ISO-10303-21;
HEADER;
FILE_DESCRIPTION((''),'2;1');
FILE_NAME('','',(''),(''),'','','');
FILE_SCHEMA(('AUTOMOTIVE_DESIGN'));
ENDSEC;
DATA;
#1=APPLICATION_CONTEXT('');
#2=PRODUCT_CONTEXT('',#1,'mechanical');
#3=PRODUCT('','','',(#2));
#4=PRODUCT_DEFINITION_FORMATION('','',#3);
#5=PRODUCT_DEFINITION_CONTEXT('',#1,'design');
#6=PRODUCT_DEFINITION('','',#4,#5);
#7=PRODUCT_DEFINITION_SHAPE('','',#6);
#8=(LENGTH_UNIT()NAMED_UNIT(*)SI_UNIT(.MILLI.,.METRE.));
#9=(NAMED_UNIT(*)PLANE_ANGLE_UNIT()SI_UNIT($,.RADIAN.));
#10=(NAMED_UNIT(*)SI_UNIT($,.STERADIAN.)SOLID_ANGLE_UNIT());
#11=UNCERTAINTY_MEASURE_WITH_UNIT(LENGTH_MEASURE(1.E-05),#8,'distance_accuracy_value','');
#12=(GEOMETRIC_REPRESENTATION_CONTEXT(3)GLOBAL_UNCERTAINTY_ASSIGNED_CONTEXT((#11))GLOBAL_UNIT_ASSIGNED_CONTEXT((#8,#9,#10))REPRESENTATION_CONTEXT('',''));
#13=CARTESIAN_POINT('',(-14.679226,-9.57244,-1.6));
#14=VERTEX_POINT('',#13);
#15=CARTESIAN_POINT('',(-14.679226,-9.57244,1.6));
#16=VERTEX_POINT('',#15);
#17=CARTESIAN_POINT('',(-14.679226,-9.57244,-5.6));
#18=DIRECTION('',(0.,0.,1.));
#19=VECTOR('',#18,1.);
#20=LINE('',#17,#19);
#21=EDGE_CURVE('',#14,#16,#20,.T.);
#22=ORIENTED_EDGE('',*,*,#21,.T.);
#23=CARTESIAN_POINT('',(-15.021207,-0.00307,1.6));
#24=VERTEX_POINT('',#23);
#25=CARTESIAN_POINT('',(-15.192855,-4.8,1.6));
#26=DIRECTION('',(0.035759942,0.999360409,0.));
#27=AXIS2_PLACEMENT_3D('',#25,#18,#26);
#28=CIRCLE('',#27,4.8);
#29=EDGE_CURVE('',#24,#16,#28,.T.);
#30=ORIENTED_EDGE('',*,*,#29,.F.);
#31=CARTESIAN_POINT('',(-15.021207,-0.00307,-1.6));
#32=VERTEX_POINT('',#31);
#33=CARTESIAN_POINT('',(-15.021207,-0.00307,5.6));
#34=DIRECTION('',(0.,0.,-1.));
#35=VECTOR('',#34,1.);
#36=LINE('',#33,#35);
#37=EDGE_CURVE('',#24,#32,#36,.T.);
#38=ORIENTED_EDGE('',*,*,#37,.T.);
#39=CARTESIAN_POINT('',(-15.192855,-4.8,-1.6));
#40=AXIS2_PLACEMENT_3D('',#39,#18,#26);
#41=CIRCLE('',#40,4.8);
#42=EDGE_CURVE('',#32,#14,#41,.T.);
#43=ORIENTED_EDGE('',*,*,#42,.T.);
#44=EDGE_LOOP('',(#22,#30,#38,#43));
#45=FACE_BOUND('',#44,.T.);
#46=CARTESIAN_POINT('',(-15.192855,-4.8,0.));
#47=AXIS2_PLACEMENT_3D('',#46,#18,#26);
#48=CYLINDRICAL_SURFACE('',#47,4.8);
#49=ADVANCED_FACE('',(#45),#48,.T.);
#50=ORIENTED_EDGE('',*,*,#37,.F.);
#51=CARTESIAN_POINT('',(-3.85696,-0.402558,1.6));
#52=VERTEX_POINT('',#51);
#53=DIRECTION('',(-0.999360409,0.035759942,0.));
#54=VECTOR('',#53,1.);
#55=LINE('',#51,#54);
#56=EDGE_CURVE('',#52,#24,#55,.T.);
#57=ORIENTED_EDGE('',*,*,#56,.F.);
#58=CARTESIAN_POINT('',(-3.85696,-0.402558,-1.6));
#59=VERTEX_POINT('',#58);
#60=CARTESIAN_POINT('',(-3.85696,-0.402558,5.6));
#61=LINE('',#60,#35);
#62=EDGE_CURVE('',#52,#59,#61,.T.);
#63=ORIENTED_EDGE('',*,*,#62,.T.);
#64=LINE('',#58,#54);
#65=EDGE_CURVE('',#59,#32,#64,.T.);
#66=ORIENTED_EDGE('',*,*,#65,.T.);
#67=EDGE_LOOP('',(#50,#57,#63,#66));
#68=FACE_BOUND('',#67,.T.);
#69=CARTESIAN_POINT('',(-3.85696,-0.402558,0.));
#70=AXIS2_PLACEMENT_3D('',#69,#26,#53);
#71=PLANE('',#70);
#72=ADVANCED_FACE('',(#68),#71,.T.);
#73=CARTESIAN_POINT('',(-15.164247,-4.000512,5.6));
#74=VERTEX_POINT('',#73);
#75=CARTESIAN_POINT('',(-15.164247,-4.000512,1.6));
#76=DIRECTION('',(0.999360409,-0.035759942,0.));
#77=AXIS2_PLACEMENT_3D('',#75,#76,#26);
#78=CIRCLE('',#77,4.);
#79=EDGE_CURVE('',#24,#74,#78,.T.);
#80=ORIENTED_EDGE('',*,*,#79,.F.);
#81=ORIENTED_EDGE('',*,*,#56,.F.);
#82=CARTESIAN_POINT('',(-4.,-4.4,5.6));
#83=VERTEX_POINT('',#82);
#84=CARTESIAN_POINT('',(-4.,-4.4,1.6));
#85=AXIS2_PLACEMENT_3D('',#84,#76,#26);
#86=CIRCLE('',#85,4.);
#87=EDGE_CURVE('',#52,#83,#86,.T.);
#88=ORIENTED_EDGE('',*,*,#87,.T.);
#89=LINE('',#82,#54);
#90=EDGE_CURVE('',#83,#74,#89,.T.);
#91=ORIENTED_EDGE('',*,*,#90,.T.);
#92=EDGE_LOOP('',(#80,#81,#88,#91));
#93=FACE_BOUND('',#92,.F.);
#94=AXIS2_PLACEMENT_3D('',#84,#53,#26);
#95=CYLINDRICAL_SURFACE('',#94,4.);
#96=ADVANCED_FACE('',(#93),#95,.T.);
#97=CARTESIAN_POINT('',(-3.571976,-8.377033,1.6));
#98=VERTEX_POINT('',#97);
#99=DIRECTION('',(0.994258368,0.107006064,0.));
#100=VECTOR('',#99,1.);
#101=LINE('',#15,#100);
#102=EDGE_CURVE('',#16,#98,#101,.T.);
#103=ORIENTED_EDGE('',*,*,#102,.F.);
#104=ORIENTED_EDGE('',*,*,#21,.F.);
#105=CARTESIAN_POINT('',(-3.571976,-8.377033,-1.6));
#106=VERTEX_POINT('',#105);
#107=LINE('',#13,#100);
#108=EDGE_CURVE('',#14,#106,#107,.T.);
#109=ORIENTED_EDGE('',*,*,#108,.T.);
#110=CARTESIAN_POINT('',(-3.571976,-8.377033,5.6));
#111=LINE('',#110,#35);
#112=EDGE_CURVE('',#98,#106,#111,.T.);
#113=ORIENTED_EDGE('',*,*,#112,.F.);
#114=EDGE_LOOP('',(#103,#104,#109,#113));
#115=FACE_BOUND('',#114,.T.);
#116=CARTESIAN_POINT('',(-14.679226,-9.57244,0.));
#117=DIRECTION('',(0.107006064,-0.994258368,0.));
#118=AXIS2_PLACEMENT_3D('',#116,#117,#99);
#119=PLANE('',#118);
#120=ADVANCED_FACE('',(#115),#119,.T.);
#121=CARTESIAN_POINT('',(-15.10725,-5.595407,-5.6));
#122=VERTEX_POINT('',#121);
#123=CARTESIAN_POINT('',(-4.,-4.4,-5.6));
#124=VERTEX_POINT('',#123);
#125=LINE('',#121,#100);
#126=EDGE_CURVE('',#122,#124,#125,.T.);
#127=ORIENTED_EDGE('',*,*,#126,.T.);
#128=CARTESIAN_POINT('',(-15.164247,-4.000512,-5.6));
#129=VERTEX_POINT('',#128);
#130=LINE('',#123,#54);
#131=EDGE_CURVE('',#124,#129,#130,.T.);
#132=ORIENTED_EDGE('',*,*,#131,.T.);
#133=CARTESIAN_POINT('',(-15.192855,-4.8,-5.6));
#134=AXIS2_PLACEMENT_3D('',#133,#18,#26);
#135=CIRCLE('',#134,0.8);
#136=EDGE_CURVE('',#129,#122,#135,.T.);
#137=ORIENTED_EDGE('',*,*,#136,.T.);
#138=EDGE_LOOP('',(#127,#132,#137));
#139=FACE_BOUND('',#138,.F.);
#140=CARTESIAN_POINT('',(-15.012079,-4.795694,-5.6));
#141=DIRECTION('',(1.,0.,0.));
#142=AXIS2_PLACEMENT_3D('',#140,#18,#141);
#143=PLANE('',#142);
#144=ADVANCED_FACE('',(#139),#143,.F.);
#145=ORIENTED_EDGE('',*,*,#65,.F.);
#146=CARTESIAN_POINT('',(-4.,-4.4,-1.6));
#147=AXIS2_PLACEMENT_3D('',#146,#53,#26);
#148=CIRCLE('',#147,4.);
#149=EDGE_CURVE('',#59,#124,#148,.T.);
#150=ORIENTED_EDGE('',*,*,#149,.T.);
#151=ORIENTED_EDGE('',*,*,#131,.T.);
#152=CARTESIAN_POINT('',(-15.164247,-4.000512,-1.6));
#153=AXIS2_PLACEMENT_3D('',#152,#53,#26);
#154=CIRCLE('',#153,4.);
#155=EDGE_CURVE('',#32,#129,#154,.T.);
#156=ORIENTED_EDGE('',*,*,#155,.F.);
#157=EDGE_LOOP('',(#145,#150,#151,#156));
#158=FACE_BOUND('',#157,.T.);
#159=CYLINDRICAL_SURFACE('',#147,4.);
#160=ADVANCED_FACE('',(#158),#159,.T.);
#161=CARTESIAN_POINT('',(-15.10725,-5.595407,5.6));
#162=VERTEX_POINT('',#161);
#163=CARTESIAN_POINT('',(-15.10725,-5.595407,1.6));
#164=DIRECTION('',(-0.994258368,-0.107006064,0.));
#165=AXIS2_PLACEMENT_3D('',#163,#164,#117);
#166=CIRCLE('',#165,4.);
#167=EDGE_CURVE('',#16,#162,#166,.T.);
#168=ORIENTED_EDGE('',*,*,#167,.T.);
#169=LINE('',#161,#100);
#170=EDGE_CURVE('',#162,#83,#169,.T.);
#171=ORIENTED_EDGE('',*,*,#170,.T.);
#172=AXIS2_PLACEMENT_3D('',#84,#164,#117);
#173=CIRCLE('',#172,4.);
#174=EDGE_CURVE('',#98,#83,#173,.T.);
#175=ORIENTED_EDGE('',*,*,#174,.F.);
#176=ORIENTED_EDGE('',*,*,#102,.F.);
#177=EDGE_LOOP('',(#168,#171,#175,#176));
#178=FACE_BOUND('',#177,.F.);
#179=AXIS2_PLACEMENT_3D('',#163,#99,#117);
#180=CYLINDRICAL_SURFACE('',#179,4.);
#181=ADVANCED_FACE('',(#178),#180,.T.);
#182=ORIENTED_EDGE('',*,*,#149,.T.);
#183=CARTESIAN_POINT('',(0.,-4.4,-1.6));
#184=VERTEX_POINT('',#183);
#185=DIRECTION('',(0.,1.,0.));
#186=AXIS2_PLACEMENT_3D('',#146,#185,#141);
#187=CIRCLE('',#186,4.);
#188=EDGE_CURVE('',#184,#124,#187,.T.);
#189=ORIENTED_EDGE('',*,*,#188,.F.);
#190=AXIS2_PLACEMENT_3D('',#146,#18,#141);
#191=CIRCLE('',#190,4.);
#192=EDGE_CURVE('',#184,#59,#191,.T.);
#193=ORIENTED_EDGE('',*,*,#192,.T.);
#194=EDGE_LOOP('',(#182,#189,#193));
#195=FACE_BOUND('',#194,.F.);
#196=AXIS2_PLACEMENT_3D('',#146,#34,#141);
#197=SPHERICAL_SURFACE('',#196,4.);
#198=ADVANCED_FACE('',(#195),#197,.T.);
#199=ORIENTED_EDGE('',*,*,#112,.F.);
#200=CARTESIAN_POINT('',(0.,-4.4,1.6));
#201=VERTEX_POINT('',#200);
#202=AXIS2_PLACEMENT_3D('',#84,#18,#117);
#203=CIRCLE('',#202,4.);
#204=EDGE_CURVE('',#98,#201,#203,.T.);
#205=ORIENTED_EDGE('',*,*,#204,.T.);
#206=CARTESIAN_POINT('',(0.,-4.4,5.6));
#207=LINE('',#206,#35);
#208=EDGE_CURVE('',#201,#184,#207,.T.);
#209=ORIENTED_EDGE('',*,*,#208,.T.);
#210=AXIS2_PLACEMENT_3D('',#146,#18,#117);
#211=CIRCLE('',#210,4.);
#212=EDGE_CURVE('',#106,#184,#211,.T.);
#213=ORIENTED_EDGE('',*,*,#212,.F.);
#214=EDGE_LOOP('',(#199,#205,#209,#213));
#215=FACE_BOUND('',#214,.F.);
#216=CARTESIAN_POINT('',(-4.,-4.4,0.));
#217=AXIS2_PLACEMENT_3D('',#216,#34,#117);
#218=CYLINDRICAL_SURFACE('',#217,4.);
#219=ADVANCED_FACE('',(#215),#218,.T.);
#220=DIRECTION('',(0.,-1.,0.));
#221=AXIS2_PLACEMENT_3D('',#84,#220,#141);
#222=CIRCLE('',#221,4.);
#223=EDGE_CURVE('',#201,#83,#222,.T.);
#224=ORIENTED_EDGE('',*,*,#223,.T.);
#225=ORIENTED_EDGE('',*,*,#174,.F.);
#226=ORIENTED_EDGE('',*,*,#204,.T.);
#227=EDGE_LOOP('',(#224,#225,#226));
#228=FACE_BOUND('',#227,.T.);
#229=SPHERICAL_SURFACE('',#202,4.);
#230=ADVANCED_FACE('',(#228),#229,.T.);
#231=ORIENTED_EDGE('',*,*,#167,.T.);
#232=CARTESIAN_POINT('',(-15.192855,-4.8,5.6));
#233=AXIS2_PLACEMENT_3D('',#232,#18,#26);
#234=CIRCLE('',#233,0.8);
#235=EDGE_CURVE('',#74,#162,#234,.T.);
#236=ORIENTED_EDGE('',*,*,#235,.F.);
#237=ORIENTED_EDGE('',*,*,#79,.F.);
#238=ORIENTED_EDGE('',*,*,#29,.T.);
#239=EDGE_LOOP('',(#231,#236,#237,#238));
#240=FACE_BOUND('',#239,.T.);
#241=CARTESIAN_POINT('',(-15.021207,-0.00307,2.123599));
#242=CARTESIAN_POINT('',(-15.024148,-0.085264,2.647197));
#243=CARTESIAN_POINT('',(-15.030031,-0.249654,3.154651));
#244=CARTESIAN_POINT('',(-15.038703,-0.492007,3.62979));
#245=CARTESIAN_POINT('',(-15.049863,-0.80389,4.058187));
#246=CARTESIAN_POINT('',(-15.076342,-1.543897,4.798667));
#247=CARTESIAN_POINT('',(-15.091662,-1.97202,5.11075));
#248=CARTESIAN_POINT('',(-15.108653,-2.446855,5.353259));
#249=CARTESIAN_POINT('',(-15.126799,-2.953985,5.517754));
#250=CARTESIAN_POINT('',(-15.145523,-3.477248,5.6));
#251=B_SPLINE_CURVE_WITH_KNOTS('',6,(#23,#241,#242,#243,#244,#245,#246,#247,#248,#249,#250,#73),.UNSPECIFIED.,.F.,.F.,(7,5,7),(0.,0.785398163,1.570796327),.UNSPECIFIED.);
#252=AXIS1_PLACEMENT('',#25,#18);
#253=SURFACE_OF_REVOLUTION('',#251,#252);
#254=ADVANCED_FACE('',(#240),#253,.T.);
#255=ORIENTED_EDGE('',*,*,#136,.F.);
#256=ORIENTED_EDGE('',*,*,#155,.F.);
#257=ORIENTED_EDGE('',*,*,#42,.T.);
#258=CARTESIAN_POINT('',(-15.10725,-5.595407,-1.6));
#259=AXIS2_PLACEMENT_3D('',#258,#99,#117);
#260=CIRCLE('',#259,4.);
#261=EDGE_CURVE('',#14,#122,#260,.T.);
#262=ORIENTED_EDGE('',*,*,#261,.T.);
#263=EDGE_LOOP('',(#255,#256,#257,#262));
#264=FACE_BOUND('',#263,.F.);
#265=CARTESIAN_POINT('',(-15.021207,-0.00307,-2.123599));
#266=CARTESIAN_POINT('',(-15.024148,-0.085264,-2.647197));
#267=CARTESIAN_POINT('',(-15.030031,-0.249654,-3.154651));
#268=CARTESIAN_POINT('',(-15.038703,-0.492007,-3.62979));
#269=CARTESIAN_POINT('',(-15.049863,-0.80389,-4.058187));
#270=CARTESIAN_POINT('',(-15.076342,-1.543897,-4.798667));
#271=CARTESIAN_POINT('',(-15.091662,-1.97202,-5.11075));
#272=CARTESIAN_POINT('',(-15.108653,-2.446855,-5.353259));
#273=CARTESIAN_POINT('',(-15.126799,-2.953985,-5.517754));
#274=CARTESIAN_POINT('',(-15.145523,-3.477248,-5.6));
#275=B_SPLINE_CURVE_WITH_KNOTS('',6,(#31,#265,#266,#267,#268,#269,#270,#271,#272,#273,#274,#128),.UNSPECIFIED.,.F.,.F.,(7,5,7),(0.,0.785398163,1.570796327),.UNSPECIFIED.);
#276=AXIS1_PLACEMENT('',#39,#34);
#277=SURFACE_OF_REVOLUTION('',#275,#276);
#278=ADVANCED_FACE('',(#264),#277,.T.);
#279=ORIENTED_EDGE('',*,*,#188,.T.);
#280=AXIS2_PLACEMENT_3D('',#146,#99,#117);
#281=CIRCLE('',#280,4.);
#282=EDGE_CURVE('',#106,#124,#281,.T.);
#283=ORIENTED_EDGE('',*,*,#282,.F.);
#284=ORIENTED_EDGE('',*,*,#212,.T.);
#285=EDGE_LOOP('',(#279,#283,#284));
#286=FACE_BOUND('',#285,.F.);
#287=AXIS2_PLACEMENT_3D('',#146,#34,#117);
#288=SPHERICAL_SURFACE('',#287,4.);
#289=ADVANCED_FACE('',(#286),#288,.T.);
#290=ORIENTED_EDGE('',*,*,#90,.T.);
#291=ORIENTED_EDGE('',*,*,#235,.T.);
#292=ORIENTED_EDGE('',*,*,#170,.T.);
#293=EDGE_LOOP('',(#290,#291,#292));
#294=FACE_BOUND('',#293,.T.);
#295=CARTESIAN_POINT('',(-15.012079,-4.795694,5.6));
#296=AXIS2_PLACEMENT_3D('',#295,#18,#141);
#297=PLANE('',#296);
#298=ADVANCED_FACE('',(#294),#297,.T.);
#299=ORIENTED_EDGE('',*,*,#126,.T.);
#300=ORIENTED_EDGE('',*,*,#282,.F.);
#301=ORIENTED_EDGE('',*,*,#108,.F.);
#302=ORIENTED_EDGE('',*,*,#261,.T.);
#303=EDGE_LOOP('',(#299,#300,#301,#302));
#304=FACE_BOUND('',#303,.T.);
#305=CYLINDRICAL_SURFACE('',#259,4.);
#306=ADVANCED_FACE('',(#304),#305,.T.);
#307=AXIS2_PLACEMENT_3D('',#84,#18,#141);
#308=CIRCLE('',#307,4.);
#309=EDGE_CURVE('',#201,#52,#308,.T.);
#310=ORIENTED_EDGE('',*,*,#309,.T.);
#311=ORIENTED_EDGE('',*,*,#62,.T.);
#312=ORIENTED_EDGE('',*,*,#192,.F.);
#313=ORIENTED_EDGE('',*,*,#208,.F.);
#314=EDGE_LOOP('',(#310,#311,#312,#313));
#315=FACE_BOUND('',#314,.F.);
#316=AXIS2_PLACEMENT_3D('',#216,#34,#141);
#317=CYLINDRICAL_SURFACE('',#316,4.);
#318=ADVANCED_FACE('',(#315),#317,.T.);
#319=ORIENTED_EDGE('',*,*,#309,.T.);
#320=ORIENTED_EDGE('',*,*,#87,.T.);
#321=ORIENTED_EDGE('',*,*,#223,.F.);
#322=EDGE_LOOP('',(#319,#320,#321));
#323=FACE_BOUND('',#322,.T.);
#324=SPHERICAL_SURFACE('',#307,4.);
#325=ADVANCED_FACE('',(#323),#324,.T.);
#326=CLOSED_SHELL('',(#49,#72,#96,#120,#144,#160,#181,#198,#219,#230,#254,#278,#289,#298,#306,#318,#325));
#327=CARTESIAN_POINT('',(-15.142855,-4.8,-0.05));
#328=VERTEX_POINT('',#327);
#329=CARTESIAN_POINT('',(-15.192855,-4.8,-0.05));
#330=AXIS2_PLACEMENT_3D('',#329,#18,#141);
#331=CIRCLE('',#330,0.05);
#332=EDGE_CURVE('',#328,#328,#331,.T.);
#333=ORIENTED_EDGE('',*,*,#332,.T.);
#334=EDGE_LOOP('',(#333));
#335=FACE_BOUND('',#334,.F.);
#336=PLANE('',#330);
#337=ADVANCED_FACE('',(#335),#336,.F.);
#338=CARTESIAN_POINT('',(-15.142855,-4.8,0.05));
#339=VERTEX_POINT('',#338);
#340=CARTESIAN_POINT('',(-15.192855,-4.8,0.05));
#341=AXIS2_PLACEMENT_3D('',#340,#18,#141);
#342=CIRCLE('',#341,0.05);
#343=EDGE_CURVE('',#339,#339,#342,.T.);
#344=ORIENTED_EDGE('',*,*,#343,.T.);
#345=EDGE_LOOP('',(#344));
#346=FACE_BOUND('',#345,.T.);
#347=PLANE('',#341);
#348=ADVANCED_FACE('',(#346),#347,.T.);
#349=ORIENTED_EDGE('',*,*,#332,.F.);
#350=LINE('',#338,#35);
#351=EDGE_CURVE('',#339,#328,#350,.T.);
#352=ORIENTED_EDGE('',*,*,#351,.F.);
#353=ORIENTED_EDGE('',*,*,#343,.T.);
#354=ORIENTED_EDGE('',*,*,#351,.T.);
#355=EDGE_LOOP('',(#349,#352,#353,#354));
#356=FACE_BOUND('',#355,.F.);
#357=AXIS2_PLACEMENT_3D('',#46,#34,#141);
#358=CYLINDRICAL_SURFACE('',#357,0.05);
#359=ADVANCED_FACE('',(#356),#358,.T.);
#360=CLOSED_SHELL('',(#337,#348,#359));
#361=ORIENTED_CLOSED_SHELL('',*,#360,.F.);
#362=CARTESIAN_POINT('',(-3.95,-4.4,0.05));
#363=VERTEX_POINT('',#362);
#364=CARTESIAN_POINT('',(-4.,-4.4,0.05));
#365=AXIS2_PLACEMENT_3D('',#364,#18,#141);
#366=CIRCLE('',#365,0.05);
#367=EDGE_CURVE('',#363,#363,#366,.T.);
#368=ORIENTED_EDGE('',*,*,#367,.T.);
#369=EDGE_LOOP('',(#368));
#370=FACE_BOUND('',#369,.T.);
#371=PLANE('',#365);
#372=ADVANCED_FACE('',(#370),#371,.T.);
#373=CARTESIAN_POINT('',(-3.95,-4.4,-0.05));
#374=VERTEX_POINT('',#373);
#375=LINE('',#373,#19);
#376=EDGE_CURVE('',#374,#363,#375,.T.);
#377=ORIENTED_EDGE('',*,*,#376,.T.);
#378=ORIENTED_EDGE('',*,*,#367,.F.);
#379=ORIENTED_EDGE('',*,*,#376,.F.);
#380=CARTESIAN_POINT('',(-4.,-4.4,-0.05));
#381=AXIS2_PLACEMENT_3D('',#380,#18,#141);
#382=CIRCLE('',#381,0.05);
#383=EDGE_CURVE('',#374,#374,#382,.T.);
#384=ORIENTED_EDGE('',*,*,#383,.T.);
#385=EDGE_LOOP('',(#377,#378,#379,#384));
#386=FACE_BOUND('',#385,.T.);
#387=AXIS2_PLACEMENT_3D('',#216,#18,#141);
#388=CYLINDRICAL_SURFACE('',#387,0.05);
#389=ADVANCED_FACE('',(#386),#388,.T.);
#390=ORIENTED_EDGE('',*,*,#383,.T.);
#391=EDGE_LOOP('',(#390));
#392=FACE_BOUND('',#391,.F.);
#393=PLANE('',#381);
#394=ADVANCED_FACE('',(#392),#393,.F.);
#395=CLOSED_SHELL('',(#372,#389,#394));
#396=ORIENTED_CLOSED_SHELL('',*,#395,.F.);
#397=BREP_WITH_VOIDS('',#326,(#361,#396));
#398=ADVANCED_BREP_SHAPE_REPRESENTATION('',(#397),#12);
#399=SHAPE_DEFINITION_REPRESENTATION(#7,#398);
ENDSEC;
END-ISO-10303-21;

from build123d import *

# Parameters (mm, degrees)
F1_R     = 0.05
F2_DEPTH = 5.6
F3_DEPTH = 0.05
F4_R     = 4


# Not quite as in the source:
# - a feature names something its author has since deleted; it is built from what else it names


with BuildPart() as f2:
    # F1 (on Top) → F2 (new body, symmetric)
    with BuildSketch(Plane.XY):
        with BuildLine():
            ThreePointArc((-14.6792257551, -9.5724401661), (-11.6217612132, -8.0073805729), (-10.3928548637, -4.8))
            ThreePointArc((-10.3928548637, -4.8), (-11.7385887293, -1.4671265442), (-15.0212071439, -0.003070038))
            ThreePointArc((-15.0212071439, -0.003070038), (-19.9897926624, -4.9714285714), (-14.6792257551, -9.5724401661))
        make_face()
        with Locations((-15.1928548637, -4.8)):
            Circle(F1_R, mode=Mode.SUBTRACT)
        with BuildLine():
            ThreePointArc((-15.0212071439, -0.003070038), (-11.7385887293, -1.4671265442), (-10.3928548637, -4.8))
            ThreePointArc((-10.3928548637, -4.8), (-11.6217612132, -8.0073805729), (-14.6792257551, -9.5724401661))
            Line((-14.6792257551, -9.5724401661), (-3.5719757428, -8.3770334717))
            ThreePointArc((-3.5719757428, -8.3770334717), (-7.9974481656, -4.5428571429), (-3.8569602335, -0.402558365))
            Line((-3.8569602335, -0.402558365), (-15.0212071439, -0.003070038))
        make_face()
        with BuildLine():
            ThreePointArc((0, -4.4), (-1.121444888, -1.6226054535), (-3.8569602335, -0.402558365))
            ThreePointArc((-3.8569602335, -0.402558365), (-7.9974481656, -4.5428571429), (-3.5719757428, -8.3770334717))
            ThreePointArc((-3.5719757428, -8.3770334717), (-1.0240886246, -7.0728171441), (0, -4.4))
        make_face()
        with Locations((-4, -4.4)):
            Circle(F1_R, mode=Mode.SUBTRACT)
        with Locations((-15.1928548637, -4.8)):
            Circle(F1_R)
        with Locations((-4, -4.4)):
            Circle(F1_R)
    extrude(amount=F2_DEPTH, both=True)

    # F1 (on Top) → F3 (cut, symmetric)
    with BuildSketch(Plane.XY):
        with Locations((-15.1928548637, -4.8)):
            Circle(F1_R)
        with Locations((-4, -4.4)):
            Circle(F1_R)
    extrude(amount=F3_DEPTH, both=True, mode=Mode.SUBTRACT)

    # F4
    f4_edges = [f2.edges().sort_by_distance(p)[0] for p in [
        (-19.989793, -4.971429, 5.6),
        (-9.125601, -8.974737, 5.6),
        (-0.002552, -4.257143, 5.6),
        (-9.439084, -0.202814, 5.6),
        (-19.989793, -4.971429, -5.6),
        (-9.125601, -8.974737, -5.6),
        (-0.002552, -4.257143, -5.6),
        (-9.439084, -0.202814, -5.6),
    ]]
    fillet(f4_edges, radius=F4_R)


solid = f2.part
